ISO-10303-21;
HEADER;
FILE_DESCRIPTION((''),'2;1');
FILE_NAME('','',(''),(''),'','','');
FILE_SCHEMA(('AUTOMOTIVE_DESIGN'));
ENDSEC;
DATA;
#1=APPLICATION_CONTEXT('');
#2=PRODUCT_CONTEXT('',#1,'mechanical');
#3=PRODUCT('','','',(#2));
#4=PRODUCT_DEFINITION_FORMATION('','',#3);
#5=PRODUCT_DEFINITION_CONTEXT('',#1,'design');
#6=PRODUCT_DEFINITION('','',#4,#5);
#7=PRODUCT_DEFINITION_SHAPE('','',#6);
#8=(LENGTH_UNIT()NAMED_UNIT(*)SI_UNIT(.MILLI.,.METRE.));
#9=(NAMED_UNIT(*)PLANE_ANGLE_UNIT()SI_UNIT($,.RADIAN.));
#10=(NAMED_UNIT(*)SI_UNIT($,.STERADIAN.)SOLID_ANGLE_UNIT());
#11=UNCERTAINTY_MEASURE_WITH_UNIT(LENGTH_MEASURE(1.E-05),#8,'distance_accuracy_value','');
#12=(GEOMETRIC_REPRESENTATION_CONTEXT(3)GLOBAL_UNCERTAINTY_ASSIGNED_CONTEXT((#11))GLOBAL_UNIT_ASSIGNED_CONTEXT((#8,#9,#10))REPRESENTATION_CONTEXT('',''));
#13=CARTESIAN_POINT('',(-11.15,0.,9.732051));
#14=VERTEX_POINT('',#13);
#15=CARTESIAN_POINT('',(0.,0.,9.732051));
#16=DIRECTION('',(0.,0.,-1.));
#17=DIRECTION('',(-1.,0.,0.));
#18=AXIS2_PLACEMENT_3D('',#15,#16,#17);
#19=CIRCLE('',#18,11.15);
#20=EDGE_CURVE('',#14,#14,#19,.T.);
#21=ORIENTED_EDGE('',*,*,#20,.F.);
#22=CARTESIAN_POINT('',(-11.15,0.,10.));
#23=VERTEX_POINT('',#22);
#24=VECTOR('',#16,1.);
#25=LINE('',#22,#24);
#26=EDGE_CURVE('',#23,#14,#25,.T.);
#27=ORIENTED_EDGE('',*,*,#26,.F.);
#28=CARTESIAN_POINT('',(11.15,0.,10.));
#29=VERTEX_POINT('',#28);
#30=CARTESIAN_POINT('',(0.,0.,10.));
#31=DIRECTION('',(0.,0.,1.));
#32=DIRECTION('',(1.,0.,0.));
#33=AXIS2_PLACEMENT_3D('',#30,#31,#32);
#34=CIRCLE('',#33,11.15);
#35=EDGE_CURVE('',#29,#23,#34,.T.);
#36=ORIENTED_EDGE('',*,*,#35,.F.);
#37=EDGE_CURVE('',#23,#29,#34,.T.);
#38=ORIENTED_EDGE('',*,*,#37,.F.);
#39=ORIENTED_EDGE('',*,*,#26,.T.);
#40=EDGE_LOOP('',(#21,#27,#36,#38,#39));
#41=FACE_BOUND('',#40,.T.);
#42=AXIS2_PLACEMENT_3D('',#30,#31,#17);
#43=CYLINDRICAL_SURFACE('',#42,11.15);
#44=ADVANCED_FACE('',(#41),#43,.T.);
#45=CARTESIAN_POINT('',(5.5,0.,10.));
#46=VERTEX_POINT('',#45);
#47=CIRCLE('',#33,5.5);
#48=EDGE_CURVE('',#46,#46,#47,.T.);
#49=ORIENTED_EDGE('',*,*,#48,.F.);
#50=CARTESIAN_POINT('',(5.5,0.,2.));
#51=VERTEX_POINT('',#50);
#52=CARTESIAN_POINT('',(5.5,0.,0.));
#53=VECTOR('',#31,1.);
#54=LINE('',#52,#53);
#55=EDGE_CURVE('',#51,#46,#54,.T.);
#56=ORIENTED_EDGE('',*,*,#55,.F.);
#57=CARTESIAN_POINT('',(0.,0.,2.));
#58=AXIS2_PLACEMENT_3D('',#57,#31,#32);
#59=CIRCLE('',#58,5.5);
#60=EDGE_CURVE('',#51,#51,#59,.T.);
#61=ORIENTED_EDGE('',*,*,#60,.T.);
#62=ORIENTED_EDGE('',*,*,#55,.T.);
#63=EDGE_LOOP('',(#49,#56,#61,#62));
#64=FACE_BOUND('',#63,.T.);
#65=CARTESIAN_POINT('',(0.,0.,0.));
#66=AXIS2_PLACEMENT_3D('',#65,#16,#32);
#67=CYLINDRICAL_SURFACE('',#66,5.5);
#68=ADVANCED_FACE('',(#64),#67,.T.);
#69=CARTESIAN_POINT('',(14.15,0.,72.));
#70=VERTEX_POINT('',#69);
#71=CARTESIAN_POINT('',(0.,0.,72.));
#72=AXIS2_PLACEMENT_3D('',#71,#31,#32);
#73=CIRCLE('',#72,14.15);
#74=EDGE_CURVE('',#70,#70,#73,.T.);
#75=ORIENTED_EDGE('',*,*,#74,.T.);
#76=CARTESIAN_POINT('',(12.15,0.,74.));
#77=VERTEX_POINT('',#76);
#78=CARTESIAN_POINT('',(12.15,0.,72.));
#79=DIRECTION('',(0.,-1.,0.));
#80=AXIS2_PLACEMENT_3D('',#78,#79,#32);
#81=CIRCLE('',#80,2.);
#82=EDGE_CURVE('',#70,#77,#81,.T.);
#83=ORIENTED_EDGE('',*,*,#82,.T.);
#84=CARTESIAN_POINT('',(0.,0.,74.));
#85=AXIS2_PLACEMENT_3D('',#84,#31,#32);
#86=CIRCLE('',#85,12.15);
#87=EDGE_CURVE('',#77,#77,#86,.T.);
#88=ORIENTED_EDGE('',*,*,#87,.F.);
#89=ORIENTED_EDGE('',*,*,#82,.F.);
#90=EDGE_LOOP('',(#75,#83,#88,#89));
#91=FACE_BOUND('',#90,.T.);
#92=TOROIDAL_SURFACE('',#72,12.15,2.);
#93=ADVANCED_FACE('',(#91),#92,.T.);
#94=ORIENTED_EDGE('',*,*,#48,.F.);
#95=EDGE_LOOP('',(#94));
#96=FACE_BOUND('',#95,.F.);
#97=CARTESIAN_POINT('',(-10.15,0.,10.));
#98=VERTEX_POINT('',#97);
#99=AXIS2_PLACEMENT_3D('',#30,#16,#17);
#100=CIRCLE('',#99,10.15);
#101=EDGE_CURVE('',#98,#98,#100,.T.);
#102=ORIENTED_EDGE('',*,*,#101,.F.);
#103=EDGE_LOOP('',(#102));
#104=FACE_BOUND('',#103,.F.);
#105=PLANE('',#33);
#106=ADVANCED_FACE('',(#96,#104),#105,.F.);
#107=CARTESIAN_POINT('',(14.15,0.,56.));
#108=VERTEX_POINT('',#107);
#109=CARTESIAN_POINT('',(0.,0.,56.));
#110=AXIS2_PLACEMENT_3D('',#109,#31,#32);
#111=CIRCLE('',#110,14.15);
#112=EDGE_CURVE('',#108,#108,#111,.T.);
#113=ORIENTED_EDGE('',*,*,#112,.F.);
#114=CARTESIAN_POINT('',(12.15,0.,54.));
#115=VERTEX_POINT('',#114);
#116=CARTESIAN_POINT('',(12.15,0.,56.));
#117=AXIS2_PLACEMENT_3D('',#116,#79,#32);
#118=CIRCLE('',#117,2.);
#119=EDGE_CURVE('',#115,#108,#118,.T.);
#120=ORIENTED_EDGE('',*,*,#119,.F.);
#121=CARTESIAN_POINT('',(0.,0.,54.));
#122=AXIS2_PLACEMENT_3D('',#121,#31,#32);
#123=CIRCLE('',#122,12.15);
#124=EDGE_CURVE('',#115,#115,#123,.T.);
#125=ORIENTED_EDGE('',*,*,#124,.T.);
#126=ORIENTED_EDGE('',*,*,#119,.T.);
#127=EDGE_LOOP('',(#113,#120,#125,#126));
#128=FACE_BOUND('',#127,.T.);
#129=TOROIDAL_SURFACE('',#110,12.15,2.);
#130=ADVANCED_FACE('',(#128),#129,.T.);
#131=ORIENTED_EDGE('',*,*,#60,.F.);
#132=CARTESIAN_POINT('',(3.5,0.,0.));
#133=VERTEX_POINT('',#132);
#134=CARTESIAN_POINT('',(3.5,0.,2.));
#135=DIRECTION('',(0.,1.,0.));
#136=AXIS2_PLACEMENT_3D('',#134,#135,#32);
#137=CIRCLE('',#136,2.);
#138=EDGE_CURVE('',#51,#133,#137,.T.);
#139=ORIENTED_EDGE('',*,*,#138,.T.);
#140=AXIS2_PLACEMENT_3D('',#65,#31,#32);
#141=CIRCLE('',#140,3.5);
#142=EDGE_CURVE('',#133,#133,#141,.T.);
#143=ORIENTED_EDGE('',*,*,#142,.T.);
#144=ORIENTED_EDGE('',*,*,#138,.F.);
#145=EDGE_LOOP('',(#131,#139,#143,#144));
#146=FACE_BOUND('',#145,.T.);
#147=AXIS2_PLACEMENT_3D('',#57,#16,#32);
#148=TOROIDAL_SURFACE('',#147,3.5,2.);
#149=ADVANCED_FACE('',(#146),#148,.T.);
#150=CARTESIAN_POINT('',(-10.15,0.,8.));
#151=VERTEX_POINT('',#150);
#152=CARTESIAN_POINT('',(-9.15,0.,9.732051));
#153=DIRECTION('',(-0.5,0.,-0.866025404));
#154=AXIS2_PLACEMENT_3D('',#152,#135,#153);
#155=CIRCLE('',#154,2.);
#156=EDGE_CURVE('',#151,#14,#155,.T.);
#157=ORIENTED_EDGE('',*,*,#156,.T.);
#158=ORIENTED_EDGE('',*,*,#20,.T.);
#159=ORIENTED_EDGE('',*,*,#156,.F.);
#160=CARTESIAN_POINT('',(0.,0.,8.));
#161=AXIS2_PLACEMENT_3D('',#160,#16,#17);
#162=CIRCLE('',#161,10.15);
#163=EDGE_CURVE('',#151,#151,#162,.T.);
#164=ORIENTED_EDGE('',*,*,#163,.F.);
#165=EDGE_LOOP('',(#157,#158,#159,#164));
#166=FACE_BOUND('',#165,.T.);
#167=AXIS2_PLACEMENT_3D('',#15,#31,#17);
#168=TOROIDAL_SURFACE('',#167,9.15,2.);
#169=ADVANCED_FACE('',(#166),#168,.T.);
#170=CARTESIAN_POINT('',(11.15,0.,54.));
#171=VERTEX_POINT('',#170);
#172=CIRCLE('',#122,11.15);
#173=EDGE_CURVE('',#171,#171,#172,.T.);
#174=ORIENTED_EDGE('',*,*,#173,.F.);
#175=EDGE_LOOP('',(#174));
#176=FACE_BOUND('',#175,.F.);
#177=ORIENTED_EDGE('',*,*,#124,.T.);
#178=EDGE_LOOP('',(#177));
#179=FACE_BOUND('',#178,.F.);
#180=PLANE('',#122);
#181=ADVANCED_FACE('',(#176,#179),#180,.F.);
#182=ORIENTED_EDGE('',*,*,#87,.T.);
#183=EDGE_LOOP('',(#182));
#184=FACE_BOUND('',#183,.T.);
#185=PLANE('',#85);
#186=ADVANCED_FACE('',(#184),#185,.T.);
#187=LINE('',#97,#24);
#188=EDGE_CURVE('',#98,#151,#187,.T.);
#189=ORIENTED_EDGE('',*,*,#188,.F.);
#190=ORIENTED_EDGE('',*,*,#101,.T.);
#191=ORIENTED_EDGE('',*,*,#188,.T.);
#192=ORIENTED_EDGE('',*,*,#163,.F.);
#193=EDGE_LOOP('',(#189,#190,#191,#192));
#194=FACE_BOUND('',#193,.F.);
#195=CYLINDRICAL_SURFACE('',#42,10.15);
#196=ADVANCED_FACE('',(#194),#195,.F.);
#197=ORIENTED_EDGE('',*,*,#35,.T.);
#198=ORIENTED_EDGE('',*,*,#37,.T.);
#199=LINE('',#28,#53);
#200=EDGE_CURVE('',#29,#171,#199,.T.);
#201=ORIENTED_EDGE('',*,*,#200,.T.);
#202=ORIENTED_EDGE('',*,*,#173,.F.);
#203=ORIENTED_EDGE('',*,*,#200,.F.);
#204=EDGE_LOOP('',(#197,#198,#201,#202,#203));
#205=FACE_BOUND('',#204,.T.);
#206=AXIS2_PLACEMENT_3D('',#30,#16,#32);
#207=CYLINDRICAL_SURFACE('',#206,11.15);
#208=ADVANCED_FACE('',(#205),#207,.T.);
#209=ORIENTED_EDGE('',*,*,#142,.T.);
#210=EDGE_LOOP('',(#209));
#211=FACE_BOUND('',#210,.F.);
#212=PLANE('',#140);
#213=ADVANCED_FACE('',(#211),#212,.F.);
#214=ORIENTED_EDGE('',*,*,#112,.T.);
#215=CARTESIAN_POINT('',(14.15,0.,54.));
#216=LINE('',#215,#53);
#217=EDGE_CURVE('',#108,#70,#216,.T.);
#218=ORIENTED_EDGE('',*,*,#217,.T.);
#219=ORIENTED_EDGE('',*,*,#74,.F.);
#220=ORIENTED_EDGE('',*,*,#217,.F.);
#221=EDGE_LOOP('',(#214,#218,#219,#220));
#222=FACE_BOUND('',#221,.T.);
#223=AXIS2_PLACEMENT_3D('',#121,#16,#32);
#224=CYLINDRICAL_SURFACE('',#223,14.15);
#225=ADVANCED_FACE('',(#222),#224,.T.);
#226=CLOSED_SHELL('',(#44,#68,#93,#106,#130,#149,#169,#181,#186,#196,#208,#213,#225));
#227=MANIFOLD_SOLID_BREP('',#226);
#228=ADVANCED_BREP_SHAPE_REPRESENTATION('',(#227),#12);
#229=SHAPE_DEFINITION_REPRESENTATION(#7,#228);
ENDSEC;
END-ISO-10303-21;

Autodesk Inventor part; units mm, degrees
ref_plane "YZ Plane" through (0, 0, 0) normal (1, 0, 0) x (0, 1, 0)
ref_plane "XZ Plane" through (0, 0, 0) normal (0, 1, 0) x (-1, 0, 0)
ref_plane "XY Plane" through (0, 0, 0) normal (0, 0, 1) x (1, 0, 0)
sketch "Sketch1" plane through (0, 0, 0) normal (0, 0, 1) x (1, 0, 0)
  circle A0 centre (0, 0) radius 5.5
  dimension "d0" = 11
extrude "Extrusion1" add sketch "Sketch1" along normal blind 10
sketch "Sketch2" plane through (0, 0, 10) normal (0, 0, 1) x (1, 0, 0)
  circle A0 centre (0, 0) radius 11.15
  dimension "d3" = 22.3
extrude "Extrusion3" add sketch "Sketch2" along normal blind 44
sketch "Sketch3" plane through (0, 0, 10) normal (0, 0, -1) x (-1, 0, 0)
  circle A0 centre (0, 0) radius 10.15
  circle A1 centre (0, 0) radius 11.15
  dimension "d8" = 20.3
  dimension "d9" = 22.3
extrude "Extrusion4" add sketch "Sketch3" along normal blind 2
sketch "Sketch4" plane through (0, 0, 54) normal (0, 0, 1) x (1, 0, 0)
  circle A0 centre (0, 0) radius 14.15
  dimension "d12" = 28.3
extrude "Extrusion5" add sketch "Sketch4" along normal blind 20
fillet "Fillet1" radius 2 1 edges at (-14.15, 0, 74)
fillet "Fillet2" radius 2 1 edges at (-5.5, 0, 0)
fillet "Fillet3" radius 2 1 edges at (11.15, 0, 8)
fillet "Fillet4" radius 2 1 edges at (-14.15, 0, 54)
properties part number "Elbow_Parallel_Rod_V1"
